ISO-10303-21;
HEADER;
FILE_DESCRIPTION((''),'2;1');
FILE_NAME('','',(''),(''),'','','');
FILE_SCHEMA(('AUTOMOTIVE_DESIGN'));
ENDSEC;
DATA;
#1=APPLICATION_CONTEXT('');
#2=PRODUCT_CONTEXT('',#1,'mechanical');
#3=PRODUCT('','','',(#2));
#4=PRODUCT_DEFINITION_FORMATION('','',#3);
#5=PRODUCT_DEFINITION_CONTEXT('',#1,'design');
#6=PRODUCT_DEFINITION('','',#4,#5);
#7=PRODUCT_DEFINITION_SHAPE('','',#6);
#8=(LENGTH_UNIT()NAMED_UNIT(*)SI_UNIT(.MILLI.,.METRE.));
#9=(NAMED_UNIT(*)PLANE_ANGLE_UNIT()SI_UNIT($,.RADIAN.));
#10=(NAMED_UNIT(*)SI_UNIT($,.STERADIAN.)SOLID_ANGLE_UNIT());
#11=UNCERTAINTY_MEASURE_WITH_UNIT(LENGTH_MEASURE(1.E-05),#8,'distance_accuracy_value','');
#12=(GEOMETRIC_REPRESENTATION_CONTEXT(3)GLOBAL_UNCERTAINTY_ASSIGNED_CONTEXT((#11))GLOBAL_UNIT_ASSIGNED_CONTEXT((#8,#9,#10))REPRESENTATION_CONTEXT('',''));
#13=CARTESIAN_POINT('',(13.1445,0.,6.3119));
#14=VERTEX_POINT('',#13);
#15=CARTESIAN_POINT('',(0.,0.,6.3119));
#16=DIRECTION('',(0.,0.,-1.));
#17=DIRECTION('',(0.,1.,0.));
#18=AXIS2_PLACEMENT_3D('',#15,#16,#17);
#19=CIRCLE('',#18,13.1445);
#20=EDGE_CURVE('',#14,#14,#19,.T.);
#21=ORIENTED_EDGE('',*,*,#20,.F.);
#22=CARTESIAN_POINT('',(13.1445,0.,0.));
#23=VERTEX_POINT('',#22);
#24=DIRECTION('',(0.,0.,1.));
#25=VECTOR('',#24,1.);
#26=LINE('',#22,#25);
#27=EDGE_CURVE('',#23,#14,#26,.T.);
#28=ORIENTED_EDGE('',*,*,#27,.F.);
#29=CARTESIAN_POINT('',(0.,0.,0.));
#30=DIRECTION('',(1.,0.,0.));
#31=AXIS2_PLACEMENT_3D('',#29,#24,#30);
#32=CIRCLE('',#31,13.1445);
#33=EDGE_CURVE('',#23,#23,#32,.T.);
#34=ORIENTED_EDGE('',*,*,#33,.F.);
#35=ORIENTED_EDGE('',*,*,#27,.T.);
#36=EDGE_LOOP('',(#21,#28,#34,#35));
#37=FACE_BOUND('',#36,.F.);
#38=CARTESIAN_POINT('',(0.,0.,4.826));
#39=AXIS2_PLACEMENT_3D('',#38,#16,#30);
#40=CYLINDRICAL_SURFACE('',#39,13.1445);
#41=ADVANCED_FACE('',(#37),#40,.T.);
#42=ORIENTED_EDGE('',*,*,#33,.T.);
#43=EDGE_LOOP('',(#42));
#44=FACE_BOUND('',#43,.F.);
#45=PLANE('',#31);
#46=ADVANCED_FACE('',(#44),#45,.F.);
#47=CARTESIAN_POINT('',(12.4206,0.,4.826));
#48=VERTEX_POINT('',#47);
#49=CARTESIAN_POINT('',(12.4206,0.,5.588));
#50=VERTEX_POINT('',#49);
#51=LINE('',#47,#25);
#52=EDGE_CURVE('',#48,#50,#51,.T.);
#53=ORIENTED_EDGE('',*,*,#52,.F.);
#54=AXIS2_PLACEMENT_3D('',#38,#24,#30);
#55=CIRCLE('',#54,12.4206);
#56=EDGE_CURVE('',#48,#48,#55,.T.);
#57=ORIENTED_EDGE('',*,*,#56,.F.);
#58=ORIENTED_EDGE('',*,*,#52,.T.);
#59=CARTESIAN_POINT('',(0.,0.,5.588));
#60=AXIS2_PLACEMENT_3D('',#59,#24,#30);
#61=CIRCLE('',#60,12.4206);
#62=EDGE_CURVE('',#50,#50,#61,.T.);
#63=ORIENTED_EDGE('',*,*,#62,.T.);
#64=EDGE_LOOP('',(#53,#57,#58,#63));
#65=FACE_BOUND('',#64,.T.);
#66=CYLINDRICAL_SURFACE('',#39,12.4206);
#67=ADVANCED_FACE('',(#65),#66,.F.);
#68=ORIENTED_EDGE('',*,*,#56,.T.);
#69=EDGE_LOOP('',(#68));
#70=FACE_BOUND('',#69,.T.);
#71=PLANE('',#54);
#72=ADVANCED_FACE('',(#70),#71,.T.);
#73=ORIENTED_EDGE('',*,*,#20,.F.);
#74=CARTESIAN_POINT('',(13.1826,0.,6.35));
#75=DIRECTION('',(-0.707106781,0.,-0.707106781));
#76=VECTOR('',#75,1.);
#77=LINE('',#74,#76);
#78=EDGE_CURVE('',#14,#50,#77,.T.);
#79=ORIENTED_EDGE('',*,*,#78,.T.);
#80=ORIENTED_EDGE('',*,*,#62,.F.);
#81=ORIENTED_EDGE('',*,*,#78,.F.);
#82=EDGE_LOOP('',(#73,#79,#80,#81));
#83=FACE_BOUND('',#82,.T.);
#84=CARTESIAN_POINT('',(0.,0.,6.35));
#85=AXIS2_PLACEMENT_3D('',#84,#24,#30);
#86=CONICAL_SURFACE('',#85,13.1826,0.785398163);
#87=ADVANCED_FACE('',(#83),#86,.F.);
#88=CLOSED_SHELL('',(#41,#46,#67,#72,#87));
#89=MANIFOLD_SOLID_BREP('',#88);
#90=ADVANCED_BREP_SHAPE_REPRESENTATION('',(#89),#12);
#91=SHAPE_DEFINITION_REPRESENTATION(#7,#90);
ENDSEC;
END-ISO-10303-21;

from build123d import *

# Parameters (mm, degrees)
F0_R     = 13.1445
F1_DEPTH = 4.826
F2_R     = 13.1445
F2_R_2   = 12.4206
F3_DEPTH = 1.524


# Not quite as in the source:
# - a fillet or chamfer that OpenCascade refuses, or shapes differently, is made with other operations: its cross-section is extruded or revolved along the edge and cut away or added


with BuildPart() as f1:
    # F0 (on Top) → F1 (new body)
    with BuildSketch(Plane.XY):
        Circle(F0_R)
    extrude(amount=F1_DEPTH)

    # F2 (on face) → F3 (join)
    with BuildSketch(Plane.XY.offset(4.826)):
        Circle(F2_R)
        Circle(F2_R_2, mode=Mode.SUBTRACT)
    extrude(amount=F3_DEPTH)

    # F4: chamfer of 0.762 on 1 edges, made by hand

    # F4_s1 → F4_t2 (revolve, cut)
    with BuildSketch(Plane.XZ):
        Polygon((13.1826, 6.35), (12.4206, 5.588), (12.4206, 6.35), align=None)
    revolve(axis=Axis((0, 0, 6.35), (0, 0, 1)), mode=Mode.SUBTRACT)


solid = f1.part
